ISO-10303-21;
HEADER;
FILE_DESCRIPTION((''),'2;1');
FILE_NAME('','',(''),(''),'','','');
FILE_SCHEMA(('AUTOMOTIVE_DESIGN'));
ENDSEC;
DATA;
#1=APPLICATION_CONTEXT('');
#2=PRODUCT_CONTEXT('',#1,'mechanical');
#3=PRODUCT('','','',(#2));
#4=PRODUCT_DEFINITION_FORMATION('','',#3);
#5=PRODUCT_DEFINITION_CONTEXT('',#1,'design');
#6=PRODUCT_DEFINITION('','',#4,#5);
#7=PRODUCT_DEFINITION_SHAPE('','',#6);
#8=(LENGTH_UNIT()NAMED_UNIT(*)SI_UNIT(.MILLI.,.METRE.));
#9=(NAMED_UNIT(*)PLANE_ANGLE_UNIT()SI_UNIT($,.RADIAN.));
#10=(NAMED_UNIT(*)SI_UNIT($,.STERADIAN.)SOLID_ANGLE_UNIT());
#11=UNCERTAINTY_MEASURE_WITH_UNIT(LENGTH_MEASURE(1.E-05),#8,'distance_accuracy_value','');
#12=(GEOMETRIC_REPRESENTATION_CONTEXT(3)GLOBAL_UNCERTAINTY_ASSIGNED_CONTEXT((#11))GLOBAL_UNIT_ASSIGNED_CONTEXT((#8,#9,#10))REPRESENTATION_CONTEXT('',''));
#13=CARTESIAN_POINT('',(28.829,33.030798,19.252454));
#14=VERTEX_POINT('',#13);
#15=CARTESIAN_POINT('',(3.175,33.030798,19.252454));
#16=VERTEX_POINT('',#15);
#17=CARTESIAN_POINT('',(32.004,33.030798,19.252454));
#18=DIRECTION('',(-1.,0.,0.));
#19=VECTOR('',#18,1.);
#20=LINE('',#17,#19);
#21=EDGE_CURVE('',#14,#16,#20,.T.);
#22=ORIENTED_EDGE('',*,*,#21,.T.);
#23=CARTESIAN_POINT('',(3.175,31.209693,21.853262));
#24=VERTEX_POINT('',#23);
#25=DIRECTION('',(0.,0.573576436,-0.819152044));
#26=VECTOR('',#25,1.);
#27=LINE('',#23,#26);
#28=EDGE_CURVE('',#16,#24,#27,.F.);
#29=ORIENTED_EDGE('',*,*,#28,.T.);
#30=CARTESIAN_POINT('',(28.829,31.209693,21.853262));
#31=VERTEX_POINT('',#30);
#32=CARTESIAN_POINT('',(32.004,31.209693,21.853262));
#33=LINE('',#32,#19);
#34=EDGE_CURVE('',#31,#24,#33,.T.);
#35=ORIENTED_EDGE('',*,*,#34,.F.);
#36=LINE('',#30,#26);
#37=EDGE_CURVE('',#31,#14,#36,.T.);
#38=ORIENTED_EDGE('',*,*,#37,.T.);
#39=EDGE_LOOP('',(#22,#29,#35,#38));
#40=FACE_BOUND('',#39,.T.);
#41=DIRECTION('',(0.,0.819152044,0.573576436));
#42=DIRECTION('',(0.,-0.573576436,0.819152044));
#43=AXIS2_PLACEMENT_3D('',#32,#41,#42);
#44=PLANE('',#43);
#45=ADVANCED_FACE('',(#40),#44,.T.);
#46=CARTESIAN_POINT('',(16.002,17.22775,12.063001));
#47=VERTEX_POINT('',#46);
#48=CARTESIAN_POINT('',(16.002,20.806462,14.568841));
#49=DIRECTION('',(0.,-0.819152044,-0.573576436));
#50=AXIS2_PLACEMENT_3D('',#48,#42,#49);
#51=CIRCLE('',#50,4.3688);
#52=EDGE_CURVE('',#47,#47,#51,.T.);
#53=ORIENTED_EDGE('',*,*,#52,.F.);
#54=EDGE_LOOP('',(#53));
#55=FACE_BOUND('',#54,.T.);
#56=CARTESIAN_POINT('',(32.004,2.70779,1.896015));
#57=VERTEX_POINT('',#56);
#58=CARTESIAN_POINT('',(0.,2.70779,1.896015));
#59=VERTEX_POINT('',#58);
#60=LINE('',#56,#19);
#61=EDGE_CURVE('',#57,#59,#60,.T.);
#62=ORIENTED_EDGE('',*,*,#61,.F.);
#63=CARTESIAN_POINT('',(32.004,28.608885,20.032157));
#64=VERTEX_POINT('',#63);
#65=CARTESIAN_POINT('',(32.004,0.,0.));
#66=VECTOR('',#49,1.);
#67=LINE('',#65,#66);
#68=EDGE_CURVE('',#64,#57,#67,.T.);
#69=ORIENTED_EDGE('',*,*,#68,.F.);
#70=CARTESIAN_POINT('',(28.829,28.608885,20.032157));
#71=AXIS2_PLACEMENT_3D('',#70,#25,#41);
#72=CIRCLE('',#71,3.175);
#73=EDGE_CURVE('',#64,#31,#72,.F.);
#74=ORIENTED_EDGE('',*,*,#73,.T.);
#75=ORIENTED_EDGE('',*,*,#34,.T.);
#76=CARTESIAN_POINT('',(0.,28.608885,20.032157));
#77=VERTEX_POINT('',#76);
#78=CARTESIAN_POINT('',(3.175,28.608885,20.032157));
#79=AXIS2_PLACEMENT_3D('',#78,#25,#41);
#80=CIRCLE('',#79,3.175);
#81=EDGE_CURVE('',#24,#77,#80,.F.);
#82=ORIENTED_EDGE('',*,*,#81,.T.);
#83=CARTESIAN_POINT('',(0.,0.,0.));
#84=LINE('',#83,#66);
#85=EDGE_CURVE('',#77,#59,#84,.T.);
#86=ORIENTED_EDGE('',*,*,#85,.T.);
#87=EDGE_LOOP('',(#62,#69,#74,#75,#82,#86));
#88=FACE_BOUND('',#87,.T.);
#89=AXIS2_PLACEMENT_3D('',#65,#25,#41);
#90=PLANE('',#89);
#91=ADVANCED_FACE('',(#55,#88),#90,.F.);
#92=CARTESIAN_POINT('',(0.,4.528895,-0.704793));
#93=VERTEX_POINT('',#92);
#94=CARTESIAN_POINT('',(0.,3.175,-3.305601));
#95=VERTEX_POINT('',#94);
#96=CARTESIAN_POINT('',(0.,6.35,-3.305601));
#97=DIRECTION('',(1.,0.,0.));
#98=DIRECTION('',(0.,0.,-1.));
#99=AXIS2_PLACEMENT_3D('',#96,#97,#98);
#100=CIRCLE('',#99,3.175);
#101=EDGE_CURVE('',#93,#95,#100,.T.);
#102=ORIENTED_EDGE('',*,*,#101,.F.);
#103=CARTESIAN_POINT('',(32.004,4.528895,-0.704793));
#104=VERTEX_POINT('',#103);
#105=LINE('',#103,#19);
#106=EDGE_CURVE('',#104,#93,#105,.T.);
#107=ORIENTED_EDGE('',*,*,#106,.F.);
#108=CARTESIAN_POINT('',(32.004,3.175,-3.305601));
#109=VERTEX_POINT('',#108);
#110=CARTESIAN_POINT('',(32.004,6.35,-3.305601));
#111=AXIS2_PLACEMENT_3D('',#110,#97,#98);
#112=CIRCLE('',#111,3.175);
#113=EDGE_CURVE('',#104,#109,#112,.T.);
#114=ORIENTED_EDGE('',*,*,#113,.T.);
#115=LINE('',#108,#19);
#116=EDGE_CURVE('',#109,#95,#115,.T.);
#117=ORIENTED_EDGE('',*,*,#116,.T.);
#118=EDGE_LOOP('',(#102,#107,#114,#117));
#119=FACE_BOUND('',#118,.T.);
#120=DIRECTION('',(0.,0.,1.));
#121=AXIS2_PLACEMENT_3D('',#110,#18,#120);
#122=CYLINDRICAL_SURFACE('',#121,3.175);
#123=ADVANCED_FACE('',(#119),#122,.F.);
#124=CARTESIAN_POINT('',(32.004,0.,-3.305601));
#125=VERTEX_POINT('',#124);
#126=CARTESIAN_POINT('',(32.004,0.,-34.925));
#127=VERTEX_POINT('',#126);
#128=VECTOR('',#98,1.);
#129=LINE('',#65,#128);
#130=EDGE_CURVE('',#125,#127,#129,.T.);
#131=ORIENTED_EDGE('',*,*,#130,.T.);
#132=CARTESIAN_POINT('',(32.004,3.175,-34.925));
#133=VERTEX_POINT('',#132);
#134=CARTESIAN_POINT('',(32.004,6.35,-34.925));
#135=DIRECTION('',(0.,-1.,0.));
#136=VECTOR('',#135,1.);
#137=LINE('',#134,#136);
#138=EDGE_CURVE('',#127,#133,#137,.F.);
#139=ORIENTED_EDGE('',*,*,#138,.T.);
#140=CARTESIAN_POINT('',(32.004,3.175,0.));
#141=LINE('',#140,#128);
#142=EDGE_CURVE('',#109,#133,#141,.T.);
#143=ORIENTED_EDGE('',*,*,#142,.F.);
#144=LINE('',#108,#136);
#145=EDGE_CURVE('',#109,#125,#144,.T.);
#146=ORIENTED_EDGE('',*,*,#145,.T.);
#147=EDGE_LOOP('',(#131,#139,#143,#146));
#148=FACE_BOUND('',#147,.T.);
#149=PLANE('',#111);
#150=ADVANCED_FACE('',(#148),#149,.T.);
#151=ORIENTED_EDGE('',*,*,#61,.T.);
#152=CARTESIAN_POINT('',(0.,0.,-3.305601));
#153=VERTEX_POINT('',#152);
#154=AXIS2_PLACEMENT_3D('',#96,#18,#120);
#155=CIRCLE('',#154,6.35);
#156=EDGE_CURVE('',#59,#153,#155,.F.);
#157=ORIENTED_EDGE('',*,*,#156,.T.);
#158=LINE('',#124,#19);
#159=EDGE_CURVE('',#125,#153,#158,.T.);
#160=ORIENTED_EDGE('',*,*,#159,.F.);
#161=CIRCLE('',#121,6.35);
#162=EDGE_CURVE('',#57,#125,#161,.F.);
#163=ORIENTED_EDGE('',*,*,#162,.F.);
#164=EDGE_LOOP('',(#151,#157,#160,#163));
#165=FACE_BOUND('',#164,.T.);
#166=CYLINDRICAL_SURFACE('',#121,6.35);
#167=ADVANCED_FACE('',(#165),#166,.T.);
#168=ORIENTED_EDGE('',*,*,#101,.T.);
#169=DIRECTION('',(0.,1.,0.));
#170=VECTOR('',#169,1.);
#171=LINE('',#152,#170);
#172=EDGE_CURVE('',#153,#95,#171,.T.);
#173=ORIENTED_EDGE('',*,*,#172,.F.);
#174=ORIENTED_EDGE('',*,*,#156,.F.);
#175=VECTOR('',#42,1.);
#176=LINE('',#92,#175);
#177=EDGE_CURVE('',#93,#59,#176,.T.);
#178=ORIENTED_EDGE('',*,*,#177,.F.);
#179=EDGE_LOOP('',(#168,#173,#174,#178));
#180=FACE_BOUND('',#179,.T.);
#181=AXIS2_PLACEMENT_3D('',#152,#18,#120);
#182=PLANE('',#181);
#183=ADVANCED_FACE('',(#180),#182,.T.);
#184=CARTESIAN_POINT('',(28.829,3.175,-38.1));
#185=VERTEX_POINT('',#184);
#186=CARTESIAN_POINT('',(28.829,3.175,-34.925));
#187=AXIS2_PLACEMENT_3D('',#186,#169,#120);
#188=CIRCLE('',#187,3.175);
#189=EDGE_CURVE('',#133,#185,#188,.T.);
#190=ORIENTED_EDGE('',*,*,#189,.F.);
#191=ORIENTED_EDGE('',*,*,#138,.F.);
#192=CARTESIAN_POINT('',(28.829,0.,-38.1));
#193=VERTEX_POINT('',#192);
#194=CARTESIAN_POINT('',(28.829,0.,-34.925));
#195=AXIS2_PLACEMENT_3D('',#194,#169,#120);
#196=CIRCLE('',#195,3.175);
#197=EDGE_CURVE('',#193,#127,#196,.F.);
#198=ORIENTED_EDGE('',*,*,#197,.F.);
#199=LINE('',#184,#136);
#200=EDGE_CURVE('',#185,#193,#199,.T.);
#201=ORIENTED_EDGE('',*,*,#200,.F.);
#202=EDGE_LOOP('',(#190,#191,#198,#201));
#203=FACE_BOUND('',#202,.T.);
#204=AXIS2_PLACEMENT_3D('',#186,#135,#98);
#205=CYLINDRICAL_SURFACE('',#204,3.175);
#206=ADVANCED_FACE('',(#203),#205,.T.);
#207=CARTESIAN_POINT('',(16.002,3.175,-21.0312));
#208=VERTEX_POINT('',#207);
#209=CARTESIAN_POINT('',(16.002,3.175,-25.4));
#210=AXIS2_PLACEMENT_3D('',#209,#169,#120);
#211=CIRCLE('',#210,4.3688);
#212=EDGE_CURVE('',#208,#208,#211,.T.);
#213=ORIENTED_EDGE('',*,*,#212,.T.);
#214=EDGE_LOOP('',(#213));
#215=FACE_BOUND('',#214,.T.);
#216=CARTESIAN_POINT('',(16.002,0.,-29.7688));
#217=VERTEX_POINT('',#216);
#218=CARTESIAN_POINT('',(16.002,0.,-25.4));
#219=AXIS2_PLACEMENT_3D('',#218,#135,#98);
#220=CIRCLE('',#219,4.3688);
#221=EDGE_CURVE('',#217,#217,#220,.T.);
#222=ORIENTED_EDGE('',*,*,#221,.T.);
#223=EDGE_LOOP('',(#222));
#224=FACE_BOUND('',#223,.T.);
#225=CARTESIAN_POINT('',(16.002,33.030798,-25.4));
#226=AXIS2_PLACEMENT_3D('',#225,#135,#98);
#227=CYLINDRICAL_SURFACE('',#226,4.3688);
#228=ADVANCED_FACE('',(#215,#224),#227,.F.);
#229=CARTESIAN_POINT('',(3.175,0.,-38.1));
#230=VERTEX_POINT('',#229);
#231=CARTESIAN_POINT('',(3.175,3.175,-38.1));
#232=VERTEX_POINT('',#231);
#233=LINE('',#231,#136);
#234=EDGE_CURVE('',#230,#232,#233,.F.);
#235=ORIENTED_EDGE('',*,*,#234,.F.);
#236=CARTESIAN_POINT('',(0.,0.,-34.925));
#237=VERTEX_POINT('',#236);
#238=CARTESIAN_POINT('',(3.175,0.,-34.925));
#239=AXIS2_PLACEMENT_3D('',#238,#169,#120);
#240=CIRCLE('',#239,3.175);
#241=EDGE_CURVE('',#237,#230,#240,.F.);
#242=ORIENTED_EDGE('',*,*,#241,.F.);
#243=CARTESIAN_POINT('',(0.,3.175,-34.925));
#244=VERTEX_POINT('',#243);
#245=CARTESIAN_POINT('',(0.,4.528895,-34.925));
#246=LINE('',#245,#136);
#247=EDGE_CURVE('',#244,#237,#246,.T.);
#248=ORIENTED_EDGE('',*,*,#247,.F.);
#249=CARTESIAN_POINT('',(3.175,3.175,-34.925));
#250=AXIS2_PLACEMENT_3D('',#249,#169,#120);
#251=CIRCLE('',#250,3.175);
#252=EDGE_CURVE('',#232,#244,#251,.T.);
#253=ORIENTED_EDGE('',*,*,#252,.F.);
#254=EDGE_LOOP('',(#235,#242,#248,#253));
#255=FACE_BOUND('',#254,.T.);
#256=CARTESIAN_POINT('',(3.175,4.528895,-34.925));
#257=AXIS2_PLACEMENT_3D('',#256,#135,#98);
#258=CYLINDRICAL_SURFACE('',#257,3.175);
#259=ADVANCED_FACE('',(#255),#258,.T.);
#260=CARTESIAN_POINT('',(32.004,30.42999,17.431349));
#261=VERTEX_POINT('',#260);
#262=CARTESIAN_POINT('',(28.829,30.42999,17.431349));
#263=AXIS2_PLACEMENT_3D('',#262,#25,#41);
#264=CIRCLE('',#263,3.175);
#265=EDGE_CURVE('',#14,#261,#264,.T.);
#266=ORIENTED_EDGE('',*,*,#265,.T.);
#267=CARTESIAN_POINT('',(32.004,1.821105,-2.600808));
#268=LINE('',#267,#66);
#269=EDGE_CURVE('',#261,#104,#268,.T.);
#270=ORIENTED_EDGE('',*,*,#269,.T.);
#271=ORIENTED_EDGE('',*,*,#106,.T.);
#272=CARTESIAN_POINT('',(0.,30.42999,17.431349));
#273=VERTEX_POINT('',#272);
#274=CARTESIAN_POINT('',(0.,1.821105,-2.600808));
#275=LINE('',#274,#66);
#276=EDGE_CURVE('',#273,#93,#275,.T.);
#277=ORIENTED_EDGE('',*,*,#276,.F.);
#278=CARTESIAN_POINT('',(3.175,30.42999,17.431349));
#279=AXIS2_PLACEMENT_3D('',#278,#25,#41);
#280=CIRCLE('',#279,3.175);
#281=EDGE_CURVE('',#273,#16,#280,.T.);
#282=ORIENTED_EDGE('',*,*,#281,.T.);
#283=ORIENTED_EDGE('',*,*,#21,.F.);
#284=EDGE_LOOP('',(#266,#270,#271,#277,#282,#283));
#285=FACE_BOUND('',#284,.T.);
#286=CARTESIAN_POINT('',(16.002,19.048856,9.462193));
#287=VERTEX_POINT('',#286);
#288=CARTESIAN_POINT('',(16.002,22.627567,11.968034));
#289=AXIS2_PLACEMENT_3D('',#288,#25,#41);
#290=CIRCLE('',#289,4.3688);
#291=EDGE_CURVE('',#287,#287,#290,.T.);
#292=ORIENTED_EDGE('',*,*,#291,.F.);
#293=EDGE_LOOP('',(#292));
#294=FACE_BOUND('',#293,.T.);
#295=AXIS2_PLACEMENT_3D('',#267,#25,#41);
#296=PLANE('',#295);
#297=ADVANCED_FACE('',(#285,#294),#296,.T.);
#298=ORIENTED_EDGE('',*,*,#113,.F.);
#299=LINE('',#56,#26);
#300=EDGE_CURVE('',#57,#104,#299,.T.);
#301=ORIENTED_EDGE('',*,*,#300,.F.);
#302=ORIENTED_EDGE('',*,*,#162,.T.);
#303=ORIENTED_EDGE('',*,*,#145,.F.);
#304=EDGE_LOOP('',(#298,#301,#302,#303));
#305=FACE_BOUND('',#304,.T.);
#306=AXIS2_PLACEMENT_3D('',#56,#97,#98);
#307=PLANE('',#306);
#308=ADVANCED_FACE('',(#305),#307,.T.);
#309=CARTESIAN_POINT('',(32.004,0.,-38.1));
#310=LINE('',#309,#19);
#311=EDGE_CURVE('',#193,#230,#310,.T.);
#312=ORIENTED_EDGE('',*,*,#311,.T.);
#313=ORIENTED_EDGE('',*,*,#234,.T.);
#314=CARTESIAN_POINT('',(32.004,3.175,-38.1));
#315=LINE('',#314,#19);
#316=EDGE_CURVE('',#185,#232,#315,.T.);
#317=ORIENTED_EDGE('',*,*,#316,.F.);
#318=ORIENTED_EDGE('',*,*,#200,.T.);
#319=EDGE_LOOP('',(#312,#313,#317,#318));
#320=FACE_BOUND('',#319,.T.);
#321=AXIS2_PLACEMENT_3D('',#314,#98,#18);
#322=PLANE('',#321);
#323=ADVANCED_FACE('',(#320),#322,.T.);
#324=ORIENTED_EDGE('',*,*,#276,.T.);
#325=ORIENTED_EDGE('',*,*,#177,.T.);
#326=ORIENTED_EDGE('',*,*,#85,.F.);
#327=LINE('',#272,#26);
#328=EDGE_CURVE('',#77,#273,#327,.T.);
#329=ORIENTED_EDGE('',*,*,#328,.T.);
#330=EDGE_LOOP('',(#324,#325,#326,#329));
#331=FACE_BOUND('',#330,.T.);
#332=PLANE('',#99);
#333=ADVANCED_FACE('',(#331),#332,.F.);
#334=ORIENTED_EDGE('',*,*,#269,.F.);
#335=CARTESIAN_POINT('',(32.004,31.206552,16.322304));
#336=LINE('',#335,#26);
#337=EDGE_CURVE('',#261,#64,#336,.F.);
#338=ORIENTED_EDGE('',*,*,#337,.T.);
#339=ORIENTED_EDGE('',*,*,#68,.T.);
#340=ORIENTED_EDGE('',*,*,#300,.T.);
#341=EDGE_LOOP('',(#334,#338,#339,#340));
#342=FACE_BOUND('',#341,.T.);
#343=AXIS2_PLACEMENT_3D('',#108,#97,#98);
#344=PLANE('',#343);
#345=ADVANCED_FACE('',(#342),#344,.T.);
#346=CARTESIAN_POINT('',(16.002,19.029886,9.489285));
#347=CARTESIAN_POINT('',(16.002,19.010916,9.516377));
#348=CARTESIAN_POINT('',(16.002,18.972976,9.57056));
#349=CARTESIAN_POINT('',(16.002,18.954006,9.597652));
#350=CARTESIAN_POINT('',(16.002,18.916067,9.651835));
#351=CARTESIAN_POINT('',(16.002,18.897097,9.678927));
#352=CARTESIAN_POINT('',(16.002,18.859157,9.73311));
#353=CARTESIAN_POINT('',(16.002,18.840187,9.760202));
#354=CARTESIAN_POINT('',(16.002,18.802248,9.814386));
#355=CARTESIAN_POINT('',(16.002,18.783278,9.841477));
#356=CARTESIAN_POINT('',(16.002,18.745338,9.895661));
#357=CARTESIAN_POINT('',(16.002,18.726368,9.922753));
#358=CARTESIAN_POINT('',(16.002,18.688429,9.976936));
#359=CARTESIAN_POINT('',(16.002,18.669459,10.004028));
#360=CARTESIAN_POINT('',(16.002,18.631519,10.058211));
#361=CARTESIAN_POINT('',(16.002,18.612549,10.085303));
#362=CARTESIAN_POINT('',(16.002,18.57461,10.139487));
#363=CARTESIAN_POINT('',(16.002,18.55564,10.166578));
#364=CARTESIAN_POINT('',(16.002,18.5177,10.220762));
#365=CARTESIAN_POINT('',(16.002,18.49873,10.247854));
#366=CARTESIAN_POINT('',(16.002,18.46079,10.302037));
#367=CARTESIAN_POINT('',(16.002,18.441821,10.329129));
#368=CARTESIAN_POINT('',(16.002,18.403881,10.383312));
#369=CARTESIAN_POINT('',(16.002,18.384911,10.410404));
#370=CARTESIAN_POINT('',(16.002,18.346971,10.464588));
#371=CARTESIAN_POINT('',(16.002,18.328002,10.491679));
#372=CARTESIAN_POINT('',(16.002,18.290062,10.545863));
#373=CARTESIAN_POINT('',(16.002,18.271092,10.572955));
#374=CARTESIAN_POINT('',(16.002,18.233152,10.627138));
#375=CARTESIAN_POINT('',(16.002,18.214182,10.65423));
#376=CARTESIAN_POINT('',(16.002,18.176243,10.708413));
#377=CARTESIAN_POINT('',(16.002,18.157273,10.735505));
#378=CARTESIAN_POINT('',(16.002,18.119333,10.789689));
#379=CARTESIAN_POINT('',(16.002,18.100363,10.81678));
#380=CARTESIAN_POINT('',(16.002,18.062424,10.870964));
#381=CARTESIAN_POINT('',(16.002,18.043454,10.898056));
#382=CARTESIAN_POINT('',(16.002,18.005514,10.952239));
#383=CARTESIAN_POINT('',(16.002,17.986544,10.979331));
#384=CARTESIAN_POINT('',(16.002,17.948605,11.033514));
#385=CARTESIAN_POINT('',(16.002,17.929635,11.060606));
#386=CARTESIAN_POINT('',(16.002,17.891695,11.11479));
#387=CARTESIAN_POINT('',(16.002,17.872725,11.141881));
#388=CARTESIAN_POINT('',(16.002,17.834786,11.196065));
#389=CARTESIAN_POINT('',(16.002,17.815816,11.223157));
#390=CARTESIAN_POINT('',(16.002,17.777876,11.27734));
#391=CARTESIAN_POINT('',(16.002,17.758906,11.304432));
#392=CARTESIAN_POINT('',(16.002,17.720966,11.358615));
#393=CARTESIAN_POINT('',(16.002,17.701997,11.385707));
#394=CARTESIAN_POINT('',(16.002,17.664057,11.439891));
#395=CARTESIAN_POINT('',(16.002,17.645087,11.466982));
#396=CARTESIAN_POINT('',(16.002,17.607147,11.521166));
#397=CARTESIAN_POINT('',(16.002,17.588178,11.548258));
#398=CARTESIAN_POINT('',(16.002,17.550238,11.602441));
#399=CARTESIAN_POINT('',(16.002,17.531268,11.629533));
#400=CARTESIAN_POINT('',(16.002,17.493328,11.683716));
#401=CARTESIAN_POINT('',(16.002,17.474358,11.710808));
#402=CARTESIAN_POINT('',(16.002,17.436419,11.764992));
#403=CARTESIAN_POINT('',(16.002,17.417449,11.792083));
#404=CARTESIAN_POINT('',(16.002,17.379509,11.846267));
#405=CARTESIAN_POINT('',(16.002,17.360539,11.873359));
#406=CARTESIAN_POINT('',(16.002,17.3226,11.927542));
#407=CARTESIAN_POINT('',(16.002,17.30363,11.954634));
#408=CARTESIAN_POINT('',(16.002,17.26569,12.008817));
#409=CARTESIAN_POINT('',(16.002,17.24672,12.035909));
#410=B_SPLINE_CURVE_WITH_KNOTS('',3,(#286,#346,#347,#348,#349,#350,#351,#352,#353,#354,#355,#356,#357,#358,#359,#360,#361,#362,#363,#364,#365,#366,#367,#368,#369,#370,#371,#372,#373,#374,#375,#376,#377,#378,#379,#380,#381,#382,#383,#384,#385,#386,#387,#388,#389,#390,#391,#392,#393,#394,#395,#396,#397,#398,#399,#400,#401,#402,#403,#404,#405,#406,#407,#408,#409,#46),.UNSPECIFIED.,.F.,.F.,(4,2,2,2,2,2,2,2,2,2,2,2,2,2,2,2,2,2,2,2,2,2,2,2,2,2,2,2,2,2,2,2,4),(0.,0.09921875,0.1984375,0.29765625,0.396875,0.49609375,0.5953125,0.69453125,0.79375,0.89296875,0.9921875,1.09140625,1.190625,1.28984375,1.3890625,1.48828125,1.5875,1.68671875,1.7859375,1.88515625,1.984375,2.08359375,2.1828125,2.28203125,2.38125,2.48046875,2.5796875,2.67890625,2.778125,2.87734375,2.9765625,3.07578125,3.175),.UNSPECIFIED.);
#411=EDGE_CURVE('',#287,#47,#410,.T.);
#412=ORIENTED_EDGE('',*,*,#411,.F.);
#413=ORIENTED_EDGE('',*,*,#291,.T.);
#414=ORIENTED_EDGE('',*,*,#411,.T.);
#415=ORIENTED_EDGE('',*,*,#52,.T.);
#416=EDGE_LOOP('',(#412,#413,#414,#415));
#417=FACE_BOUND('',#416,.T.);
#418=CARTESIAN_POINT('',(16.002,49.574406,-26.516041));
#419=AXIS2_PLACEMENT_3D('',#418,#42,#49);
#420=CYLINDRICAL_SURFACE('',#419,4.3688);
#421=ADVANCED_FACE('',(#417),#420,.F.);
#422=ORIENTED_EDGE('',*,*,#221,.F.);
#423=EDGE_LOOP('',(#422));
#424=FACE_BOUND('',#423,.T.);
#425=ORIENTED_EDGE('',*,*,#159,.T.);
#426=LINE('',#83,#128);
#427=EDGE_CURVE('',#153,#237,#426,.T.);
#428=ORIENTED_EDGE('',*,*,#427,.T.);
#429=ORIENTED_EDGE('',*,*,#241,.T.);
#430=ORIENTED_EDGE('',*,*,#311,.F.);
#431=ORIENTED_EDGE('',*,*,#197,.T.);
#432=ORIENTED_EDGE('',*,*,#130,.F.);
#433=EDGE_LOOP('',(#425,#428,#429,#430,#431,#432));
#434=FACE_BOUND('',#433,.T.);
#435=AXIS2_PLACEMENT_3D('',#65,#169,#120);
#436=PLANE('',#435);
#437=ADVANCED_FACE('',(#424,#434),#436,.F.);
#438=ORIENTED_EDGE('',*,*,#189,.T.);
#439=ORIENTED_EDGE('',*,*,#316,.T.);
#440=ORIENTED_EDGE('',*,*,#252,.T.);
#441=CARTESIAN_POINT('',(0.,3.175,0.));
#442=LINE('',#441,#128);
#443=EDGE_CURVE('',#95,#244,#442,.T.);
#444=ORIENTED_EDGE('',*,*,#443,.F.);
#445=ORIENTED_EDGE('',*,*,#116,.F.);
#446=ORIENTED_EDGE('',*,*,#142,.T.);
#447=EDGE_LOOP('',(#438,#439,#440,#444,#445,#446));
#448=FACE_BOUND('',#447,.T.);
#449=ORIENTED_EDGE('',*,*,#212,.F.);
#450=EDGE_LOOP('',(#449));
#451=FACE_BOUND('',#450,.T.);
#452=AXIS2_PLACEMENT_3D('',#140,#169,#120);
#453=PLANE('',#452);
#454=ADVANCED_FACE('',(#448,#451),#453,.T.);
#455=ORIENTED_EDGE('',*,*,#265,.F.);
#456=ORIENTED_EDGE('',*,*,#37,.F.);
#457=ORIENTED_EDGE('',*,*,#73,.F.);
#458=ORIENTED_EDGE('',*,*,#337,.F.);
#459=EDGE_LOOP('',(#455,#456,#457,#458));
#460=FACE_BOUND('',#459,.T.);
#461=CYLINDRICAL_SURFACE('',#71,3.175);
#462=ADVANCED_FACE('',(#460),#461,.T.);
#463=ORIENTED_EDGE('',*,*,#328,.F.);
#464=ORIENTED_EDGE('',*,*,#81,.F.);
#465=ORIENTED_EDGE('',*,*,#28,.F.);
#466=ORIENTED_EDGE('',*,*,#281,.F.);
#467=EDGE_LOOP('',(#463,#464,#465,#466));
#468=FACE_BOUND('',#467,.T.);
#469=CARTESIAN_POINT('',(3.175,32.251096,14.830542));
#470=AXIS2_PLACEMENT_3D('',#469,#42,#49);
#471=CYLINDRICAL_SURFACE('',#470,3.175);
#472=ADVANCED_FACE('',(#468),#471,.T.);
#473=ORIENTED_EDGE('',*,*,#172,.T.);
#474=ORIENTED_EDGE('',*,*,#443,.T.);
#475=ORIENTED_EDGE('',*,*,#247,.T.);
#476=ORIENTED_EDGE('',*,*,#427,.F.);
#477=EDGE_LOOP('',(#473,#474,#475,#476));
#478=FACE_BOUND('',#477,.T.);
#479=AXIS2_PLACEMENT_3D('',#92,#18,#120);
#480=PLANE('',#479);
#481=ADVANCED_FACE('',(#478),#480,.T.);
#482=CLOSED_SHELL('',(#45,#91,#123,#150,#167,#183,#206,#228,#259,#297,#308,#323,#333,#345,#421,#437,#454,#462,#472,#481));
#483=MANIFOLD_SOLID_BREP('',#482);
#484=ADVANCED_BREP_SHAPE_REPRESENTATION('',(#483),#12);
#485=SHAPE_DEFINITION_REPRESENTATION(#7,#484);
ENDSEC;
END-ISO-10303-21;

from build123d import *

# Parameters (mm, degrees)
BASE_FLANGE1_DEPTH = 32.004
SKETCH6_R          = 4.3688
CUT_EXTRUDE1_DEPTH = 60.723526665
SKETCH7_R          = 4.3688
CUT_EXTRUDE2_DEPTH = 60.723526665
FILLET1_R          = 3.175


# Sheet-metal steps are written as plain solids
with BuildPart() as part:
    # Sketch1 → Base-Flange1 (new body)
    with BuildSketch(Plane(origin=(0, 0, 0), x_dir=(0, 0, -1), z_dir=(1, 0, 0))):
        with BuildLine():
            Line((38.1, 0), (3.305600771, 0))
            ThreePointArc((3.305600771, 0), (0.373497077, 0.717481209), (-1.89601471, 2.707789629))
            Line((-1.89601471, 2.707789629), (-21.853262225, 31.209692887))
            Line((-21.853262225, 31.209692887), (-19.252454484, 33.030798073))
            Line((-19.252454484, 33.030798073), (0.70479303, 4.528894815))
            ThreePointArc((0.70479303, 4.528894815), (1.839548924, 3.533740605), (3.305600771, 3.175))
            Line((3.305600771, 3.175), (38.1, 3.175))
            Line((38.1, 3.175), (38.1, 0))
        make_face()
    extrude(amount=BASE_FLANGE1_DEPTH)

    # Sketch6 → Cut-Extrude1 (cut, through all)
    with BuildSketch(Plane(origin=(0, 0, 0), x_dir=(1, 0, 0), z_dir=(0, -0.5735764363510502, 0.819152044288989))):
        with Locations(Location((16.002, 25.4, 0), (0, 0, 270))):
            Circle(SKETCH6_R)
    extrude(amount=-CUT_EXTRUDE1_DEPTH, mode=Mode.SUBTRACT)

    # Sketch7 → Cut-Extrude2 (cut, through all)
    with BuildSketch(Plane.XZ):
        with Locations(Location((16.002, -25.4, 0), (0, 0, 270))):
            Circle(SKETCH7_R)
    extrude(amount=-CUT_EXTRUDE2_DEPTH, mode=Mode.SUBTRACT)

    # Fillet1
    fillet1_edges = [part.edges().sort_by_distance(p)[0] for p in [
        (32.004, 32.12024548, 20.552858355),
        (0, 32.12024548, 20.552858355),
        (32.004, 1.5875, -38.1),
        (0, 1.5875, -38.1),
    ]]
    fillet(fillet1_edges, radius=FILLET1_R)


solid = part.part
